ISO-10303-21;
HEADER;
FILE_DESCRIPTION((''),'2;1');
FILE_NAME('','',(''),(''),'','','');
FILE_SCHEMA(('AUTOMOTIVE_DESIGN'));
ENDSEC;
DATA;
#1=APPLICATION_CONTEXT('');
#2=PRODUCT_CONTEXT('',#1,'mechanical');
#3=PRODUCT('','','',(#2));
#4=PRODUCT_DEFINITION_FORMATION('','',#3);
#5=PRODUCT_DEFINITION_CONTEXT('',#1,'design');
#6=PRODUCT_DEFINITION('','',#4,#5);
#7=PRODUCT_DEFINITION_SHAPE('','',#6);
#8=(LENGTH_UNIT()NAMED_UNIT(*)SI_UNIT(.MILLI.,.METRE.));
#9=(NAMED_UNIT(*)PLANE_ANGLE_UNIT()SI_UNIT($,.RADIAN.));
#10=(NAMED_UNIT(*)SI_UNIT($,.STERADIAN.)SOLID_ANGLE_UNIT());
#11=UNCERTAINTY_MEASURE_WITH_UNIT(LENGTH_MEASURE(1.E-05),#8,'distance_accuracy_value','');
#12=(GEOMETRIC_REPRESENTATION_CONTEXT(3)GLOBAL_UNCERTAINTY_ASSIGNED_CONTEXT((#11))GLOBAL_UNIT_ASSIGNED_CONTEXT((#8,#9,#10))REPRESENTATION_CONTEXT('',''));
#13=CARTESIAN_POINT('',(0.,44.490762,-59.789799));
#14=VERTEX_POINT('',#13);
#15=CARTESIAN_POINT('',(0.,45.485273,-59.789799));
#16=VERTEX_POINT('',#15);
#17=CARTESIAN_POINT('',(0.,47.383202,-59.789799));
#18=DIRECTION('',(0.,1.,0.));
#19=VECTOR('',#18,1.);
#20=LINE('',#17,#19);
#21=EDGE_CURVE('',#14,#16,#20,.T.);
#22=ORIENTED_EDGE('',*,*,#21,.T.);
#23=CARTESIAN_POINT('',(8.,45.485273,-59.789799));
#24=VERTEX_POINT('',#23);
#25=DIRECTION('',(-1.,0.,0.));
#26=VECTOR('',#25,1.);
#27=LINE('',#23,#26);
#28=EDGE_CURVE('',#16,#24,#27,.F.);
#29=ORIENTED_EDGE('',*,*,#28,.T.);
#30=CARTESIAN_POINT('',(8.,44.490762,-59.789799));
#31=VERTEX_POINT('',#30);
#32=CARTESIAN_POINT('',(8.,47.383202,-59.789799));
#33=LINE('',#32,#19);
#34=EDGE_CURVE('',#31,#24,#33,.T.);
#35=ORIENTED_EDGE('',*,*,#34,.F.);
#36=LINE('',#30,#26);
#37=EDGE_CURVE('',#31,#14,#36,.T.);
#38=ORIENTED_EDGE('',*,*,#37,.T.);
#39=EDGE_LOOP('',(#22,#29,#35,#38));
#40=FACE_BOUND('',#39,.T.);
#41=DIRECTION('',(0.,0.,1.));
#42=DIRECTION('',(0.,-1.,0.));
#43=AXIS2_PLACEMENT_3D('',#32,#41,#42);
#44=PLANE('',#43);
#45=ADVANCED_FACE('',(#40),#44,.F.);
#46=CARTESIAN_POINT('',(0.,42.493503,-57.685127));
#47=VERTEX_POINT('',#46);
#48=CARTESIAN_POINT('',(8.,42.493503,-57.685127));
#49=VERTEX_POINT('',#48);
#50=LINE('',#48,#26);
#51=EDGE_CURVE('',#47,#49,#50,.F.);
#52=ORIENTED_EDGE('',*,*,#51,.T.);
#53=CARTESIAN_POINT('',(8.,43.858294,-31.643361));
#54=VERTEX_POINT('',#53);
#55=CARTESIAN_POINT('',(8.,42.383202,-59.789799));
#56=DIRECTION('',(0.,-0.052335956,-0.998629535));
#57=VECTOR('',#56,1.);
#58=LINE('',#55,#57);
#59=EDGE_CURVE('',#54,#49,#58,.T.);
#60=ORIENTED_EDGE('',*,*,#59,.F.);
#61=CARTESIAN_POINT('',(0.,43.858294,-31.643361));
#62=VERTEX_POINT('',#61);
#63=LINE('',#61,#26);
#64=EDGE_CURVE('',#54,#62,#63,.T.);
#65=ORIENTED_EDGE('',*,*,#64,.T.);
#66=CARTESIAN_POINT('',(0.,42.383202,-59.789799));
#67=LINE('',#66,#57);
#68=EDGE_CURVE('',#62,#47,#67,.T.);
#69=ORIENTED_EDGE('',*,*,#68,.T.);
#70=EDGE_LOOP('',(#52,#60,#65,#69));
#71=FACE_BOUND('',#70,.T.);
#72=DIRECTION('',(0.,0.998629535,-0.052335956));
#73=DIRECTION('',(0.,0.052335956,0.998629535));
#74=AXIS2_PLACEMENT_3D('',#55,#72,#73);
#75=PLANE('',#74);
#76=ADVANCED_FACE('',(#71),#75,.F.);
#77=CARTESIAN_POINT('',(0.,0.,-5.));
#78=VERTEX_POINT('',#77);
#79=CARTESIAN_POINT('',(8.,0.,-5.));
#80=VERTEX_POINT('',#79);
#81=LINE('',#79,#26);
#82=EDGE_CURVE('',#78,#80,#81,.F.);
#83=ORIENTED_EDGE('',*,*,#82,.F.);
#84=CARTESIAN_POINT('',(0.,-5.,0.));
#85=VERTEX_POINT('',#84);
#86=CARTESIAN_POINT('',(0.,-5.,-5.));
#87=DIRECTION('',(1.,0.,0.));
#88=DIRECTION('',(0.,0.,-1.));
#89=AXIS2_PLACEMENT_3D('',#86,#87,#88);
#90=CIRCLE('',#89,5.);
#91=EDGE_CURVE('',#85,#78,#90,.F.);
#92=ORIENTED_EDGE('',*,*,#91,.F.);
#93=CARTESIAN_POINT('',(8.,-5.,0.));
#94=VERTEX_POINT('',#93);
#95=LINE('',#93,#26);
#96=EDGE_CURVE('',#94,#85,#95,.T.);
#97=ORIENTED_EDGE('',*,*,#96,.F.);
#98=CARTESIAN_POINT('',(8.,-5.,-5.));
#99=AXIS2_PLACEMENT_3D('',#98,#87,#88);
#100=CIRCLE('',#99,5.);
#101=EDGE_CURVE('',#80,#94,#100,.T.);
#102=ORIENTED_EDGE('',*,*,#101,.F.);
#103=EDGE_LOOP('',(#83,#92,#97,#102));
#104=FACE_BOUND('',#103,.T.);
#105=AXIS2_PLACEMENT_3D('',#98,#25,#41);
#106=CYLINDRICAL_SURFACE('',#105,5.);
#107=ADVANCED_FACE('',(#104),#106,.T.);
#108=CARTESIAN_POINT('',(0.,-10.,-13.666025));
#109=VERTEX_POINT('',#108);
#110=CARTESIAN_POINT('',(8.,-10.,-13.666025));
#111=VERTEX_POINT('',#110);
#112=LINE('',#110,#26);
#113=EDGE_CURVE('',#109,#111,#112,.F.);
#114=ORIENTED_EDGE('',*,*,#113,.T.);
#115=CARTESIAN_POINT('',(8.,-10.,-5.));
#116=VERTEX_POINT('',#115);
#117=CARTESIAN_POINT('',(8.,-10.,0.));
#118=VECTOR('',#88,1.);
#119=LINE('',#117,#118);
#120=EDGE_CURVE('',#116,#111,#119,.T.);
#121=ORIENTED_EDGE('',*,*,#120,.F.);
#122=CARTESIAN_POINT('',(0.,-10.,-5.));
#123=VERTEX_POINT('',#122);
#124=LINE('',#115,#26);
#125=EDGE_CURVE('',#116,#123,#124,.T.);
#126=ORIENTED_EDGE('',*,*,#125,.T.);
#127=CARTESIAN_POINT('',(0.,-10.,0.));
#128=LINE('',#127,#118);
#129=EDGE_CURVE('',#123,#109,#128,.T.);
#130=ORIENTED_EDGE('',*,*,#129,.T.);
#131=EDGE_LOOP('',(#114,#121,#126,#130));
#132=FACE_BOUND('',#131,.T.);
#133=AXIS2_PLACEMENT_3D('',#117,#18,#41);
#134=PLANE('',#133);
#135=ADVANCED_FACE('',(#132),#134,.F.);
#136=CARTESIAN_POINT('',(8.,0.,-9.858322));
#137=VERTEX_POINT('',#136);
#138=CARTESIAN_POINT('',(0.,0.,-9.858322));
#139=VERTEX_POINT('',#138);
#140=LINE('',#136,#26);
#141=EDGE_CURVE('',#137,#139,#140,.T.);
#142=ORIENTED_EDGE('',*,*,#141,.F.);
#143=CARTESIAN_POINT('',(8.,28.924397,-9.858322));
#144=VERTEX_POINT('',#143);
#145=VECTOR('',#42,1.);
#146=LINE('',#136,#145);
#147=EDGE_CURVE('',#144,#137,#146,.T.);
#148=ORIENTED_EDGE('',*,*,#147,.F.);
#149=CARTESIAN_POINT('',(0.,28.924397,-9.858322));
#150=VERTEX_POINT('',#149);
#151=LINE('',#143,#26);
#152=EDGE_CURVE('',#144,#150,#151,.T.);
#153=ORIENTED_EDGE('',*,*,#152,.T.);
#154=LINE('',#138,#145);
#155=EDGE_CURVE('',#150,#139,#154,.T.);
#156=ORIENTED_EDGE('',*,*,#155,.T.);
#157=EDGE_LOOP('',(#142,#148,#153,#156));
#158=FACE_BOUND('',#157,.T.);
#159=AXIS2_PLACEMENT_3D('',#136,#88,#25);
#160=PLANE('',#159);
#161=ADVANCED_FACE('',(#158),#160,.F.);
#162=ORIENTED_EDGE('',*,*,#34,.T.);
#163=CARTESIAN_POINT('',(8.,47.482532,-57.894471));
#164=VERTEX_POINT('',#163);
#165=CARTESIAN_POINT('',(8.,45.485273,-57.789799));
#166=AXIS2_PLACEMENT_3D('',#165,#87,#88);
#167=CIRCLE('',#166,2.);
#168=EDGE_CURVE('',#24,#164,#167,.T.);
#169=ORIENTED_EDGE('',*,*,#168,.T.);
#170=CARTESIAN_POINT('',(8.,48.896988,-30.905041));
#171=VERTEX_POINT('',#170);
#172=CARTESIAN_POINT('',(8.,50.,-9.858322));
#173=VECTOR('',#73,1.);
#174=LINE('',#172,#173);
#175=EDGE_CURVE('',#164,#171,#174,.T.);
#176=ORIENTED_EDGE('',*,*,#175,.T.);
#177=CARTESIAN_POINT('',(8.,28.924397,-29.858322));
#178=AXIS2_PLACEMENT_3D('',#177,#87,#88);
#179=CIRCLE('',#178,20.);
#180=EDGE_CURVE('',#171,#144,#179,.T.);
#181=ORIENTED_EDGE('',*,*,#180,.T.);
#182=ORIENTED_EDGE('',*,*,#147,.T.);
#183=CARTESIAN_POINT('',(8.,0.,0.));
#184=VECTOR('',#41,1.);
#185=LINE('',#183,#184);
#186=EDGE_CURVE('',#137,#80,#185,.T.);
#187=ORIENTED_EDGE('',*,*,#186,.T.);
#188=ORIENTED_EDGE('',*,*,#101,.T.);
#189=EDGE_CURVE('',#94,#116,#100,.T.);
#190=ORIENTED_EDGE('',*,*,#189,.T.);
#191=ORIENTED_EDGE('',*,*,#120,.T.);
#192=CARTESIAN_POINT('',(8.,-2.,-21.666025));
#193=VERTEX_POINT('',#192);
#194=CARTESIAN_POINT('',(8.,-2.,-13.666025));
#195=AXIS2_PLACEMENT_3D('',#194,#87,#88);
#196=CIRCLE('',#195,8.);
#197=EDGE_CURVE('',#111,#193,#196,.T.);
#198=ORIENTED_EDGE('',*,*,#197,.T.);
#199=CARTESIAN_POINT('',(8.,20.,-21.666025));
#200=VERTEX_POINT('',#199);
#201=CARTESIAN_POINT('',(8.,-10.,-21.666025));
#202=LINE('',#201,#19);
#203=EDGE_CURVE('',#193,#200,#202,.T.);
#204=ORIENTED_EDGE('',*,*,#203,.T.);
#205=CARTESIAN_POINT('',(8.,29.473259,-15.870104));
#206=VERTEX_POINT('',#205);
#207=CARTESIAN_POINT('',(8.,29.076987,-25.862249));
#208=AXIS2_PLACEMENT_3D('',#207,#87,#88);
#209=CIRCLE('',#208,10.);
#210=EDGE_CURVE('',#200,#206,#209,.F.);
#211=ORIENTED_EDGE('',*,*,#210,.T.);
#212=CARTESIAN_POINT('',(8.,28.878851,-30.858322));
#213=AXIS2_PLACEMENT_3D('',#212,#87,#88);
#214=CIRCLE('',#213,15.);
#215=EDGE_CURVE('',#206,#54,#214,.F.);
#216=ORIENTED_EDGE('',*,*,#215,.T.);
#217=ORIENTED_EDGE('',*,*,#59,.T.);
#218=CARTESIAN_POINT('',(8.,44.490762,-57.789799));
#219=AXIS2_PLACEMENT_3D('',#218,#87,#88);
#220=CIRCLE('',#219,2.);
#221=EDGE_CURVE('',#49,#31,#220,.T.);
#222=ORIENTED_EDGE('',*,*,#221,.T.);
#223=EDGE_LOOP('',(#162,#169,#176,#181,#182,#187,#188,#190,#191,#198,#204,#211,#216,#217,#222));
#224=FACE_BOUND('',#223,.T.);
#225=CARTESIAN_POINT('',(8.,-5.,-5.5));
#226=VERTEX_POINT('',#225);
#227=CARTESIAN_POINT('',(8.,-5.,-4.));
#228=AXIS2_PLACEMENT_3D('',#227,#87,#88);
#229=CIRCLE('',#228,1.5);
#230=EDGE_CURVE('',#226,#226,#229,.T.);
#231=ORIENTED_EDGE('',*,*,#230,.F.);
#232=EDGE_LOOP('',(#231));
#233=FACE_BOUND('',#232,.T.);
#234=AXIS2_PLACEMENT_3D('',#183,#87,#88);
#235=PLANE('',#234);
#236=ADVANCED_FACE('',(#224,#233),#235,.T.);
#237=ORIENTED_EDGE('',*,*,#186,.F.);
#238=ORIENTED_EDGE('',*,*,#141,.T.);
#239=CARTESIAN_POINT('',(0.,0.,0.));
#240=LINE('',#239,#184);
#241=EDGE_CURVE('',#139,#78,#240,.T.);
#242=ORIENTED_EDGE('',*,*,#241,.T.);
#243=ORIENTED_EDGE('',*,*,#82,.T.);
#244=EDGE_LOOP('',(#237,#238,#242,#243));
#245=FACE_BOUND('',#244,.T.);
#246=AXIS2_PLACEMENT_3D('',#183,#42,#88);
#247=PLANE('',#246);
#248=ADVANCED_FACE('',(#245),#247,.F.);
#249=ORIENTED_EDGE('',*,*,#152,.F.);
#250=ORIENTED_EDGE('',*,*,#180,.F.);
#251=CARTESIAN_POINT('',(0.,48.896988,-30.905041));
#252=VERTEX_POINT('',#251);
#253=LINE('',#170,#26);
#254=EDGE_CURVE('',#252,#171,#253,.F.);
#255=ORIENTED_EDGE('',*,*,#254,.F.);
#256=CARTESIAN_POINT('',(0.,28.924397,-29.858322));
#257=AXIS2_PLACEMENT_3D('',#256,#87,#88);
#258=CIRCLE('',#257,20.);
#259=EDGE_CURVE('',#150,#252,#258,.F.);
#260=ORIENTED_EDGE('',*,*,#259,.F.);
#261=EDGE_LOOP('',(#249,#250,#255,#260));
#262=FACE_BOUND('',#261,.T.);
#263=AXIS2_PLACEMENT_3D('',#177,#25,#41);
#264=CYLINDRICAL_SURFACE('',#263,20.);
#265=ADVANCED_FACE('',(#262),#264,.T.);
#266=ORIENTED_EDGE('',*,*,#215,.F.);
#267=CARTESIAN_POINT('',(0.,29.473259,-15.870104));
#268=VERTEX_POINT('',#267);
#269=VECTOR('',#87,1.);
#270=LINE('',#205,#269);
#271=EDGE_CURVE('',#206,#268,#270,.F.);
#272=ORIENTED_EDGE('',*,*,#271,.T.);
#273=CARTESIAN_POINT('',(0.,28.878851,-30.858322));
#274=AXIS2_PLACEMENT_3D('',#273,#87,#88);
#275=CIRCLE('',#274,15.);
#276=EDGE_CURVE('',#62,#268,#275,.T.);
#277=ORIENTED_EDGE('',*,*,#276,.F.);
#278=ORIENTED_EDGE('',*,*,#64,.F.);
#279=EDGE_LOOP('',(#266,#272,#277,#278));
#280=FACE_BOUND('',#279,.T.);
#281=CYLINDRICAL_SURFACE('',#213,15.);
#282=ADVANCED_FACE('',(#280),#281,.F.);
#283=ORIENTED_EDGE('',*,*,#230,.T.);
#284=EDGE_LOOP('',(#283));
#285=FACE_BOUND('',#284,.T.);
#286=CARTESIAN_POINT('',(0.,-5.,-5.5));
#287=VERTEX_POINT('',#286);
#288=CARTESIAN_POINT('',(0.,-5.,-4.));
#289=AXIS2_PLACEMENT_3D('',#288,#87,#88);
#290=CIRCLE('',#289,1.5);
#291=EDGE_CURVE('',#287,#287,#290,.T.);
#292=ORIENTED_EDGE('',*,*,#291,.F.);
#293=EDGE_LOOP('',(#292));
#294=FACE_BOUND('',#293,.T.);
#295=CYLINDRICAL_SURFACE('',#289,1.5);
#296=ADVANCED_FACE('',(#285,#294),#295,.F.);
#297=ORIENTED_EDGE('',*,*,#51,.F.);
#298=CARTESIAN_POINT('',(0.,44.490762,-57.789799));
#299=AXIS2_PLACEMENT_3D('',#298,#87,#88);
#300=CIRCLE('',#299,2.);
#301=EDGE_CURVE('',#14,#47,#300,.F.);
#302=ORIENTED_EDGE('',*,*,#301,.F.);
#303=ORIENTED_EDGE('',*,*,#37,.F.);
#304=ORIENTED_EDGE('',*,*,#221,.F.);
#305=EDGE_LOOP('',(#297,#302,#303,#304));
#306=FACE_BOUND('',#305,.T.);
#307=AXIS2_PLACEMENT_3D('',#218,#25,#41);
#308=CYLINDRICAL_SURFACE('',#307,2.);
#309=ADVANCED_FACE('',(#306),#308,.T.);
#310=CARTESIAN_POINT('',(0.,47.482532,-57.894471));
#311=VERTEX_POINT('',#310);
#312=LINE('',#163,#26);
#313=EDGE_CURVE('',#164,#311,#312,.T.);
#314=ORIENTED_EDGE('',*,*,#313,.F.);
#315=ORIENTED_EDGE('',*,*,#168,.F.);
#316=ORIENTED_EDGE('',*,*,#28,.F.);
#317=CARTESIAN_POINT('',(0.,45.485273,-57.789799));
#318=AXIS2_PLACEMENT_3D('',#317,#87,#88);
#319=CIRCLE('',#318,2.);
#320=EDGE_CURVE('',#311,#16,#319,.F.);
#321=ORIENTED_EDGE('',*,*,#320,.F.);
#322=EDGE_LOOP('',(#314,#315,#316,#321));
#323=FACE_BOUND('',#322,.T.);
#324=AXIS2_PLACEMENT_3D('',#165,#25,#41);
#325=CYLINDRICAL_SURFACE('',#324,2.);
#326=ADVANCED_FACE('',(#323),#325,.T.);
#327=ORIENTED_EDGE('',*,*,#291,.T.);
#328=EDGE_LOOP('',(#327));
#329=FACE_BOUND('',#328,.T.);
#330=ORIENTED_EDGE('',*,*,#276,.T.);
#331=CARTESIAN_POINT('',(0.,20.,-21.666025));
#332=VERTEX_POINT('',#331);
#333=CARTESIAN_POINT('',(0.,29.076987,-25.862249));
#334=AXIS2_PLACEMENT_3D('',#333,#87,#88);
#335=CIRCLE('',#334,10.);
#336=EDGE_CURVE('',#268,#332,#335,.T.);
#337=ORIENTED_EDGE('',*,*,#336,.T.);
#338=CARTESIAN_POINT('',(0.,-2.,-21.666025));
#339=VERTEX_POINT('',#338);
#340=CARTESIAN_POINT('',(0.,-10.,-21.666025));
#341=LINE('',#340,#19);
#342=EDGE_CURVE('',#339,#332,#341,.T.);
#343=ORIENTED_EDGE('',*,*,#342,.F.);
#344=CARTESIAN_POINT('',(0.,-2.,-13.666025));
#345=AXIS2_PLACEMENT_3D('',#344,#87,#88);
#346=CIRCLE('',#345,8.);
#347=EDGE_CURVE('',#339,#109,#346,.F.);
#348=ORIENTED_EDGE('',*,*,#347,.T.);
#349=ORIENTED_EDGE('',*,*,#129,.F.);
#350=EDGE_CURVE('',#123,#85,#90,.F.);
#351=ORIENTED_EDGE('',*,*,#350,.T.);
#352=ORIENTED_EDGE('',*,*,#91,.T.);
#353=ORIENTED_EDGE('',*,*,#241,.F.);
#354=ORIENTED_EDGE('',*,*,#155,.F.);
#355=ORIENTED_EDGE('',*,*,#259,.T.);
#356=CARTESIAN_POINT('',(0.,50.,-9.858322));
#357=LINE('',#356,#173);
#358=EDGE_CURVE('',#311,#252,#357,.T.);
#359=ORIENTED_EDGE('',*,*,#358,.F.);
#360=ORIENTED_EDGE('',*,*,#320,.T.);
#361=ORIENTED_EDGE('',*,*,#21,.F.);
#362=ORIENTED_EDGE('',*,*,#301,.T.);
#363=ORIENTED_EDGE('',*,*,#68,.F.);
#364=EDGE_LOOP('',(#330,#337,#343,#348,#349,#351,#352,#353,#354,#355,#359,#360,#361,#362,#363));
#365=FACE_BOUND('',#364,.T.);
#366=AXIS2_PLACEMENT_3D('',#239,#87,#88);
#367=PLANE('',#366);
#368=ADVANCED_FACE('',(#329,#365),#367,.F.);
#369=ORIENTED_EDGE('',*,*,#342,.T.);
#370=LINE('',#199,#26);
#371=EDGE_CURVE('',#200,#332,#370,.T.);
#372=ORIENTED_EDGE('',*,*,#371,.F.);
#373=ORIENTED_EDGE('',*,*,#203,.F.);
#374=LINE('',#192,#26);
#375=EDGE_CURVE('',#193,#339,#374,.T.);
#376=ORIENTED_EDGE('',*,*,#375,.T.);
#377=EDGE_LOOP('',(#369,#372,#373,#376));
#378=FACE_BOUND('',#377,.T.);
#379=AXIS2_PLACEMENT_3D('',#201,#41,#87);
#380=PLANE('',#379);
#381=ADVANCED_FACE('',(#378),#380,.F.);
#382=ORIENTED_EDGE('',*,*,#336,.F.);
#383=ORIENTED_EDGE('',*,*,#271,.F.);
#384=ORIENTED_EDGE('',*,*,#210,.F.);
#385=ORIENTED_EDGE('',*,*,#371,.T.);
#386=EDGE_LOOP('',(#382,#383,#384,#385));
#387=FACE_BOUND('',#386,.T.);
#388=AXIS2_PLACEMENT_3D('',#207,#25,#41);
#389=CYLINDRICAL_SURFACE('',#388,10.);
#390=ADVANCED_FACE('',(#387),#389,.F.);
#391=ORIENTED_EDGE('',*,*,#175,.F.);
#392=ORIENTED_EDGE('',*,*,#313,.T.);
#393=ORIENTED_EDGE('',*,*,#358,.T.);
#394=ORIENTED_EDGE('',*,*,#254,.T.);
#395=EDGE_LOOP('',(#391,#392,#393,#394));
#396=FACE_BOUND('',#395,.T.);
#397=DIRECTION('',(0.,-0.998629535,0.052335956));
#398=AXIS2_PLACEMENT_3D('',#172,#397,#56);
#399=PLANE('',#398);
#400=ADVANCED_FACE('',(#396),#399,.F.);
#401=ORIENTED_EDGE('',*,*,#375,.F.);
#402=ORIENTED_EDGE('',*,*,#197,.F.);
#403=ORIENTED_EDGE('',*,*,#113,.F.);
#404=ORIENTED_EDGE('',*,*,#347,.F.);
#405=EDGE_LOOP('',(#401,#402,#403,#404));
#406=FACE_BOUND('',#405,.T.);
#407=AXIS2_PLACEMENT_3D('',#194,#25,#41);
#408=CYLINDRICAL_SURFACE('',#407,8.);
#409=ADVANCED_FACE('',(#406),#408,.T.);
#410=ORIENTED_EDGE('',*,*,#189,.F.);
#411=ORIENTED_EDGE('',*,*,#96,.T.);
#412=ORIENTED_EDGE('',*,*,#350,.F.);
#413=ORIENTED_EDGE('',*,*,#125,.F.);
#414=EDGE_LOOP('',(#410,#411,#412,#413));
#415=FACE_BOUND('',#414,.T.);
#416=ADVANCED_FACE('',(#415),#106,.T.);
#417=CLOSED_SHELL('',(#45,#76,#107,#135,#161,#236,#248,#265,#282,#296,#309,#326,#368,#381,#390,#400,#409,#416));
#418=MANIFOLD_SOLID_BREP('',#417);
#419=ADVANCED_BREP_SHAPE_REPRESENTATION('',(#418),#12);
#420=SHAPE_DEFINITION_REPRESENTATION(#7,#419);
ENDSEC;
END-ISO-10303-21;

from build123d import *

# Parameters (mm, degrees)
BOSS_EXTRUDE2_DEPTH = 8
FILLET1_R           = 15
FILLET2_R           = 20
FILLET3_R           = 10
FILLET4_R           = 2
FILLET5_R           = 5
SKETCH3_R           = 1.5
CUT_EXTRUDE1_DEPTH  = 78.668634045
FILLET6_R           = 8


# Some blends are built 0.0001 mm under size
with BuildPart() as part:
    # Sketch2 → Boss-Extrude2 (new body)
    with BuildSketch(Plane(origin=(0, 0, 0), x_dir=(0, 0, -1), z_dir=(1, 0, 0))):
        Polygon((0, 0), (9.858322093, 0), (9.858322093, 50), (59.789798831, 47.383202188), (59.789798831, 42.383202188), (15.858322093, 44.685553324), (15.858322093, 20), (21.66602455, 20), (21.66602455, -10), (0, -10), align=None)
    extrude(amount=BOSS_EXTRUDE2_DEPTH)

    # Fillet1
    fillet1_edges = [part.edges().sort_by_distance(p)[0] for p in [
        (4, 44.685553324, -15.858322093),
    ]]
    fillet(fillet1_edges, radius=FILLET1_R)

    # Fillet2
    fillet2_edges = [part.edges().sort_by_distance(p)[0] for p in [
        (4, 50, -9.858322093),
    ]]
    fillet(fillet2_edges, radius=FILLET2_R)

    # Fillet3
    # the kernel refuses this fillet: 10 mm, written as the material it adds along each edge
    with BuildSketch(Plane(origin=(0, 20, -15.858322093), x_dir=(0, 0.9999992265968354, -0.0012437064489906054), z_dir=(1, 0, 0))) as fillet3_piece_1:
        with BuildLine():
            CenterArc((9.089422143, -9.992630476), FILLET3_R, 87.800195831, 67.460307547)
            Line((0.007223077, -5.807697966), (-0.90099683, -5.389204715))
            ThreePointArc((-0.90099683, -5.389204715), (-0.996387688, -2.905092689), (-0.999999227, -0.001243706))
            Line((-0.999999227, -0.001243706), (-0.001243706, 0.999999227))
            ThreePointArc((-0.001243706, 0.999999227), (8.877600872, 1.011041911), (9.511650474, 0.999263048))
            Line((9.511650474, 0.999263048), (9.473266081, 0))
        make_face()
    extrude(amount=8)

    # Fillet4
    fillet4_edges = [part.edges().sort_by_distance(p)[0] for p in [
        (4, 47.383202188, -59.789798831),
        (4, 42.383202188, -59.789798831),
    ]]
    fillet(fillet4_edges, radius=FILLET4_R)

    # Fillet5
    fillet5_edges = [part.edges().sort_by_distance(p)[0] for p in [
        (4, -10, 0),
        (4, 0, 0),
    ]]
    fillet(fillet5_edges, radius=FILLET5_R - 0.0001)  # a hair under: the kernel refuses the full size

    # Sketch3 → Cut-Extrude1 (cut, through all)
    with BuildSketch(Plane(origin=(8, 0, 0), x_dir=(0, 0, -1), z_dir=(1, 0, 0))):
        with Locations((4, -5)):
            Circle(SKETCH3_R)
    extrude(amount=-CUT_EXTRUDE1_DEPTH, mode=Mode.SUBTRACT)

    # Fillet6
    fillet6_edges = [part.edges().sort_by_distance(p)[0] for p in [
        (4, -10, -21.66602455),
    ]]
    fillet(fillet6_edges, radius=FILLET6_R)


solid = part.part
